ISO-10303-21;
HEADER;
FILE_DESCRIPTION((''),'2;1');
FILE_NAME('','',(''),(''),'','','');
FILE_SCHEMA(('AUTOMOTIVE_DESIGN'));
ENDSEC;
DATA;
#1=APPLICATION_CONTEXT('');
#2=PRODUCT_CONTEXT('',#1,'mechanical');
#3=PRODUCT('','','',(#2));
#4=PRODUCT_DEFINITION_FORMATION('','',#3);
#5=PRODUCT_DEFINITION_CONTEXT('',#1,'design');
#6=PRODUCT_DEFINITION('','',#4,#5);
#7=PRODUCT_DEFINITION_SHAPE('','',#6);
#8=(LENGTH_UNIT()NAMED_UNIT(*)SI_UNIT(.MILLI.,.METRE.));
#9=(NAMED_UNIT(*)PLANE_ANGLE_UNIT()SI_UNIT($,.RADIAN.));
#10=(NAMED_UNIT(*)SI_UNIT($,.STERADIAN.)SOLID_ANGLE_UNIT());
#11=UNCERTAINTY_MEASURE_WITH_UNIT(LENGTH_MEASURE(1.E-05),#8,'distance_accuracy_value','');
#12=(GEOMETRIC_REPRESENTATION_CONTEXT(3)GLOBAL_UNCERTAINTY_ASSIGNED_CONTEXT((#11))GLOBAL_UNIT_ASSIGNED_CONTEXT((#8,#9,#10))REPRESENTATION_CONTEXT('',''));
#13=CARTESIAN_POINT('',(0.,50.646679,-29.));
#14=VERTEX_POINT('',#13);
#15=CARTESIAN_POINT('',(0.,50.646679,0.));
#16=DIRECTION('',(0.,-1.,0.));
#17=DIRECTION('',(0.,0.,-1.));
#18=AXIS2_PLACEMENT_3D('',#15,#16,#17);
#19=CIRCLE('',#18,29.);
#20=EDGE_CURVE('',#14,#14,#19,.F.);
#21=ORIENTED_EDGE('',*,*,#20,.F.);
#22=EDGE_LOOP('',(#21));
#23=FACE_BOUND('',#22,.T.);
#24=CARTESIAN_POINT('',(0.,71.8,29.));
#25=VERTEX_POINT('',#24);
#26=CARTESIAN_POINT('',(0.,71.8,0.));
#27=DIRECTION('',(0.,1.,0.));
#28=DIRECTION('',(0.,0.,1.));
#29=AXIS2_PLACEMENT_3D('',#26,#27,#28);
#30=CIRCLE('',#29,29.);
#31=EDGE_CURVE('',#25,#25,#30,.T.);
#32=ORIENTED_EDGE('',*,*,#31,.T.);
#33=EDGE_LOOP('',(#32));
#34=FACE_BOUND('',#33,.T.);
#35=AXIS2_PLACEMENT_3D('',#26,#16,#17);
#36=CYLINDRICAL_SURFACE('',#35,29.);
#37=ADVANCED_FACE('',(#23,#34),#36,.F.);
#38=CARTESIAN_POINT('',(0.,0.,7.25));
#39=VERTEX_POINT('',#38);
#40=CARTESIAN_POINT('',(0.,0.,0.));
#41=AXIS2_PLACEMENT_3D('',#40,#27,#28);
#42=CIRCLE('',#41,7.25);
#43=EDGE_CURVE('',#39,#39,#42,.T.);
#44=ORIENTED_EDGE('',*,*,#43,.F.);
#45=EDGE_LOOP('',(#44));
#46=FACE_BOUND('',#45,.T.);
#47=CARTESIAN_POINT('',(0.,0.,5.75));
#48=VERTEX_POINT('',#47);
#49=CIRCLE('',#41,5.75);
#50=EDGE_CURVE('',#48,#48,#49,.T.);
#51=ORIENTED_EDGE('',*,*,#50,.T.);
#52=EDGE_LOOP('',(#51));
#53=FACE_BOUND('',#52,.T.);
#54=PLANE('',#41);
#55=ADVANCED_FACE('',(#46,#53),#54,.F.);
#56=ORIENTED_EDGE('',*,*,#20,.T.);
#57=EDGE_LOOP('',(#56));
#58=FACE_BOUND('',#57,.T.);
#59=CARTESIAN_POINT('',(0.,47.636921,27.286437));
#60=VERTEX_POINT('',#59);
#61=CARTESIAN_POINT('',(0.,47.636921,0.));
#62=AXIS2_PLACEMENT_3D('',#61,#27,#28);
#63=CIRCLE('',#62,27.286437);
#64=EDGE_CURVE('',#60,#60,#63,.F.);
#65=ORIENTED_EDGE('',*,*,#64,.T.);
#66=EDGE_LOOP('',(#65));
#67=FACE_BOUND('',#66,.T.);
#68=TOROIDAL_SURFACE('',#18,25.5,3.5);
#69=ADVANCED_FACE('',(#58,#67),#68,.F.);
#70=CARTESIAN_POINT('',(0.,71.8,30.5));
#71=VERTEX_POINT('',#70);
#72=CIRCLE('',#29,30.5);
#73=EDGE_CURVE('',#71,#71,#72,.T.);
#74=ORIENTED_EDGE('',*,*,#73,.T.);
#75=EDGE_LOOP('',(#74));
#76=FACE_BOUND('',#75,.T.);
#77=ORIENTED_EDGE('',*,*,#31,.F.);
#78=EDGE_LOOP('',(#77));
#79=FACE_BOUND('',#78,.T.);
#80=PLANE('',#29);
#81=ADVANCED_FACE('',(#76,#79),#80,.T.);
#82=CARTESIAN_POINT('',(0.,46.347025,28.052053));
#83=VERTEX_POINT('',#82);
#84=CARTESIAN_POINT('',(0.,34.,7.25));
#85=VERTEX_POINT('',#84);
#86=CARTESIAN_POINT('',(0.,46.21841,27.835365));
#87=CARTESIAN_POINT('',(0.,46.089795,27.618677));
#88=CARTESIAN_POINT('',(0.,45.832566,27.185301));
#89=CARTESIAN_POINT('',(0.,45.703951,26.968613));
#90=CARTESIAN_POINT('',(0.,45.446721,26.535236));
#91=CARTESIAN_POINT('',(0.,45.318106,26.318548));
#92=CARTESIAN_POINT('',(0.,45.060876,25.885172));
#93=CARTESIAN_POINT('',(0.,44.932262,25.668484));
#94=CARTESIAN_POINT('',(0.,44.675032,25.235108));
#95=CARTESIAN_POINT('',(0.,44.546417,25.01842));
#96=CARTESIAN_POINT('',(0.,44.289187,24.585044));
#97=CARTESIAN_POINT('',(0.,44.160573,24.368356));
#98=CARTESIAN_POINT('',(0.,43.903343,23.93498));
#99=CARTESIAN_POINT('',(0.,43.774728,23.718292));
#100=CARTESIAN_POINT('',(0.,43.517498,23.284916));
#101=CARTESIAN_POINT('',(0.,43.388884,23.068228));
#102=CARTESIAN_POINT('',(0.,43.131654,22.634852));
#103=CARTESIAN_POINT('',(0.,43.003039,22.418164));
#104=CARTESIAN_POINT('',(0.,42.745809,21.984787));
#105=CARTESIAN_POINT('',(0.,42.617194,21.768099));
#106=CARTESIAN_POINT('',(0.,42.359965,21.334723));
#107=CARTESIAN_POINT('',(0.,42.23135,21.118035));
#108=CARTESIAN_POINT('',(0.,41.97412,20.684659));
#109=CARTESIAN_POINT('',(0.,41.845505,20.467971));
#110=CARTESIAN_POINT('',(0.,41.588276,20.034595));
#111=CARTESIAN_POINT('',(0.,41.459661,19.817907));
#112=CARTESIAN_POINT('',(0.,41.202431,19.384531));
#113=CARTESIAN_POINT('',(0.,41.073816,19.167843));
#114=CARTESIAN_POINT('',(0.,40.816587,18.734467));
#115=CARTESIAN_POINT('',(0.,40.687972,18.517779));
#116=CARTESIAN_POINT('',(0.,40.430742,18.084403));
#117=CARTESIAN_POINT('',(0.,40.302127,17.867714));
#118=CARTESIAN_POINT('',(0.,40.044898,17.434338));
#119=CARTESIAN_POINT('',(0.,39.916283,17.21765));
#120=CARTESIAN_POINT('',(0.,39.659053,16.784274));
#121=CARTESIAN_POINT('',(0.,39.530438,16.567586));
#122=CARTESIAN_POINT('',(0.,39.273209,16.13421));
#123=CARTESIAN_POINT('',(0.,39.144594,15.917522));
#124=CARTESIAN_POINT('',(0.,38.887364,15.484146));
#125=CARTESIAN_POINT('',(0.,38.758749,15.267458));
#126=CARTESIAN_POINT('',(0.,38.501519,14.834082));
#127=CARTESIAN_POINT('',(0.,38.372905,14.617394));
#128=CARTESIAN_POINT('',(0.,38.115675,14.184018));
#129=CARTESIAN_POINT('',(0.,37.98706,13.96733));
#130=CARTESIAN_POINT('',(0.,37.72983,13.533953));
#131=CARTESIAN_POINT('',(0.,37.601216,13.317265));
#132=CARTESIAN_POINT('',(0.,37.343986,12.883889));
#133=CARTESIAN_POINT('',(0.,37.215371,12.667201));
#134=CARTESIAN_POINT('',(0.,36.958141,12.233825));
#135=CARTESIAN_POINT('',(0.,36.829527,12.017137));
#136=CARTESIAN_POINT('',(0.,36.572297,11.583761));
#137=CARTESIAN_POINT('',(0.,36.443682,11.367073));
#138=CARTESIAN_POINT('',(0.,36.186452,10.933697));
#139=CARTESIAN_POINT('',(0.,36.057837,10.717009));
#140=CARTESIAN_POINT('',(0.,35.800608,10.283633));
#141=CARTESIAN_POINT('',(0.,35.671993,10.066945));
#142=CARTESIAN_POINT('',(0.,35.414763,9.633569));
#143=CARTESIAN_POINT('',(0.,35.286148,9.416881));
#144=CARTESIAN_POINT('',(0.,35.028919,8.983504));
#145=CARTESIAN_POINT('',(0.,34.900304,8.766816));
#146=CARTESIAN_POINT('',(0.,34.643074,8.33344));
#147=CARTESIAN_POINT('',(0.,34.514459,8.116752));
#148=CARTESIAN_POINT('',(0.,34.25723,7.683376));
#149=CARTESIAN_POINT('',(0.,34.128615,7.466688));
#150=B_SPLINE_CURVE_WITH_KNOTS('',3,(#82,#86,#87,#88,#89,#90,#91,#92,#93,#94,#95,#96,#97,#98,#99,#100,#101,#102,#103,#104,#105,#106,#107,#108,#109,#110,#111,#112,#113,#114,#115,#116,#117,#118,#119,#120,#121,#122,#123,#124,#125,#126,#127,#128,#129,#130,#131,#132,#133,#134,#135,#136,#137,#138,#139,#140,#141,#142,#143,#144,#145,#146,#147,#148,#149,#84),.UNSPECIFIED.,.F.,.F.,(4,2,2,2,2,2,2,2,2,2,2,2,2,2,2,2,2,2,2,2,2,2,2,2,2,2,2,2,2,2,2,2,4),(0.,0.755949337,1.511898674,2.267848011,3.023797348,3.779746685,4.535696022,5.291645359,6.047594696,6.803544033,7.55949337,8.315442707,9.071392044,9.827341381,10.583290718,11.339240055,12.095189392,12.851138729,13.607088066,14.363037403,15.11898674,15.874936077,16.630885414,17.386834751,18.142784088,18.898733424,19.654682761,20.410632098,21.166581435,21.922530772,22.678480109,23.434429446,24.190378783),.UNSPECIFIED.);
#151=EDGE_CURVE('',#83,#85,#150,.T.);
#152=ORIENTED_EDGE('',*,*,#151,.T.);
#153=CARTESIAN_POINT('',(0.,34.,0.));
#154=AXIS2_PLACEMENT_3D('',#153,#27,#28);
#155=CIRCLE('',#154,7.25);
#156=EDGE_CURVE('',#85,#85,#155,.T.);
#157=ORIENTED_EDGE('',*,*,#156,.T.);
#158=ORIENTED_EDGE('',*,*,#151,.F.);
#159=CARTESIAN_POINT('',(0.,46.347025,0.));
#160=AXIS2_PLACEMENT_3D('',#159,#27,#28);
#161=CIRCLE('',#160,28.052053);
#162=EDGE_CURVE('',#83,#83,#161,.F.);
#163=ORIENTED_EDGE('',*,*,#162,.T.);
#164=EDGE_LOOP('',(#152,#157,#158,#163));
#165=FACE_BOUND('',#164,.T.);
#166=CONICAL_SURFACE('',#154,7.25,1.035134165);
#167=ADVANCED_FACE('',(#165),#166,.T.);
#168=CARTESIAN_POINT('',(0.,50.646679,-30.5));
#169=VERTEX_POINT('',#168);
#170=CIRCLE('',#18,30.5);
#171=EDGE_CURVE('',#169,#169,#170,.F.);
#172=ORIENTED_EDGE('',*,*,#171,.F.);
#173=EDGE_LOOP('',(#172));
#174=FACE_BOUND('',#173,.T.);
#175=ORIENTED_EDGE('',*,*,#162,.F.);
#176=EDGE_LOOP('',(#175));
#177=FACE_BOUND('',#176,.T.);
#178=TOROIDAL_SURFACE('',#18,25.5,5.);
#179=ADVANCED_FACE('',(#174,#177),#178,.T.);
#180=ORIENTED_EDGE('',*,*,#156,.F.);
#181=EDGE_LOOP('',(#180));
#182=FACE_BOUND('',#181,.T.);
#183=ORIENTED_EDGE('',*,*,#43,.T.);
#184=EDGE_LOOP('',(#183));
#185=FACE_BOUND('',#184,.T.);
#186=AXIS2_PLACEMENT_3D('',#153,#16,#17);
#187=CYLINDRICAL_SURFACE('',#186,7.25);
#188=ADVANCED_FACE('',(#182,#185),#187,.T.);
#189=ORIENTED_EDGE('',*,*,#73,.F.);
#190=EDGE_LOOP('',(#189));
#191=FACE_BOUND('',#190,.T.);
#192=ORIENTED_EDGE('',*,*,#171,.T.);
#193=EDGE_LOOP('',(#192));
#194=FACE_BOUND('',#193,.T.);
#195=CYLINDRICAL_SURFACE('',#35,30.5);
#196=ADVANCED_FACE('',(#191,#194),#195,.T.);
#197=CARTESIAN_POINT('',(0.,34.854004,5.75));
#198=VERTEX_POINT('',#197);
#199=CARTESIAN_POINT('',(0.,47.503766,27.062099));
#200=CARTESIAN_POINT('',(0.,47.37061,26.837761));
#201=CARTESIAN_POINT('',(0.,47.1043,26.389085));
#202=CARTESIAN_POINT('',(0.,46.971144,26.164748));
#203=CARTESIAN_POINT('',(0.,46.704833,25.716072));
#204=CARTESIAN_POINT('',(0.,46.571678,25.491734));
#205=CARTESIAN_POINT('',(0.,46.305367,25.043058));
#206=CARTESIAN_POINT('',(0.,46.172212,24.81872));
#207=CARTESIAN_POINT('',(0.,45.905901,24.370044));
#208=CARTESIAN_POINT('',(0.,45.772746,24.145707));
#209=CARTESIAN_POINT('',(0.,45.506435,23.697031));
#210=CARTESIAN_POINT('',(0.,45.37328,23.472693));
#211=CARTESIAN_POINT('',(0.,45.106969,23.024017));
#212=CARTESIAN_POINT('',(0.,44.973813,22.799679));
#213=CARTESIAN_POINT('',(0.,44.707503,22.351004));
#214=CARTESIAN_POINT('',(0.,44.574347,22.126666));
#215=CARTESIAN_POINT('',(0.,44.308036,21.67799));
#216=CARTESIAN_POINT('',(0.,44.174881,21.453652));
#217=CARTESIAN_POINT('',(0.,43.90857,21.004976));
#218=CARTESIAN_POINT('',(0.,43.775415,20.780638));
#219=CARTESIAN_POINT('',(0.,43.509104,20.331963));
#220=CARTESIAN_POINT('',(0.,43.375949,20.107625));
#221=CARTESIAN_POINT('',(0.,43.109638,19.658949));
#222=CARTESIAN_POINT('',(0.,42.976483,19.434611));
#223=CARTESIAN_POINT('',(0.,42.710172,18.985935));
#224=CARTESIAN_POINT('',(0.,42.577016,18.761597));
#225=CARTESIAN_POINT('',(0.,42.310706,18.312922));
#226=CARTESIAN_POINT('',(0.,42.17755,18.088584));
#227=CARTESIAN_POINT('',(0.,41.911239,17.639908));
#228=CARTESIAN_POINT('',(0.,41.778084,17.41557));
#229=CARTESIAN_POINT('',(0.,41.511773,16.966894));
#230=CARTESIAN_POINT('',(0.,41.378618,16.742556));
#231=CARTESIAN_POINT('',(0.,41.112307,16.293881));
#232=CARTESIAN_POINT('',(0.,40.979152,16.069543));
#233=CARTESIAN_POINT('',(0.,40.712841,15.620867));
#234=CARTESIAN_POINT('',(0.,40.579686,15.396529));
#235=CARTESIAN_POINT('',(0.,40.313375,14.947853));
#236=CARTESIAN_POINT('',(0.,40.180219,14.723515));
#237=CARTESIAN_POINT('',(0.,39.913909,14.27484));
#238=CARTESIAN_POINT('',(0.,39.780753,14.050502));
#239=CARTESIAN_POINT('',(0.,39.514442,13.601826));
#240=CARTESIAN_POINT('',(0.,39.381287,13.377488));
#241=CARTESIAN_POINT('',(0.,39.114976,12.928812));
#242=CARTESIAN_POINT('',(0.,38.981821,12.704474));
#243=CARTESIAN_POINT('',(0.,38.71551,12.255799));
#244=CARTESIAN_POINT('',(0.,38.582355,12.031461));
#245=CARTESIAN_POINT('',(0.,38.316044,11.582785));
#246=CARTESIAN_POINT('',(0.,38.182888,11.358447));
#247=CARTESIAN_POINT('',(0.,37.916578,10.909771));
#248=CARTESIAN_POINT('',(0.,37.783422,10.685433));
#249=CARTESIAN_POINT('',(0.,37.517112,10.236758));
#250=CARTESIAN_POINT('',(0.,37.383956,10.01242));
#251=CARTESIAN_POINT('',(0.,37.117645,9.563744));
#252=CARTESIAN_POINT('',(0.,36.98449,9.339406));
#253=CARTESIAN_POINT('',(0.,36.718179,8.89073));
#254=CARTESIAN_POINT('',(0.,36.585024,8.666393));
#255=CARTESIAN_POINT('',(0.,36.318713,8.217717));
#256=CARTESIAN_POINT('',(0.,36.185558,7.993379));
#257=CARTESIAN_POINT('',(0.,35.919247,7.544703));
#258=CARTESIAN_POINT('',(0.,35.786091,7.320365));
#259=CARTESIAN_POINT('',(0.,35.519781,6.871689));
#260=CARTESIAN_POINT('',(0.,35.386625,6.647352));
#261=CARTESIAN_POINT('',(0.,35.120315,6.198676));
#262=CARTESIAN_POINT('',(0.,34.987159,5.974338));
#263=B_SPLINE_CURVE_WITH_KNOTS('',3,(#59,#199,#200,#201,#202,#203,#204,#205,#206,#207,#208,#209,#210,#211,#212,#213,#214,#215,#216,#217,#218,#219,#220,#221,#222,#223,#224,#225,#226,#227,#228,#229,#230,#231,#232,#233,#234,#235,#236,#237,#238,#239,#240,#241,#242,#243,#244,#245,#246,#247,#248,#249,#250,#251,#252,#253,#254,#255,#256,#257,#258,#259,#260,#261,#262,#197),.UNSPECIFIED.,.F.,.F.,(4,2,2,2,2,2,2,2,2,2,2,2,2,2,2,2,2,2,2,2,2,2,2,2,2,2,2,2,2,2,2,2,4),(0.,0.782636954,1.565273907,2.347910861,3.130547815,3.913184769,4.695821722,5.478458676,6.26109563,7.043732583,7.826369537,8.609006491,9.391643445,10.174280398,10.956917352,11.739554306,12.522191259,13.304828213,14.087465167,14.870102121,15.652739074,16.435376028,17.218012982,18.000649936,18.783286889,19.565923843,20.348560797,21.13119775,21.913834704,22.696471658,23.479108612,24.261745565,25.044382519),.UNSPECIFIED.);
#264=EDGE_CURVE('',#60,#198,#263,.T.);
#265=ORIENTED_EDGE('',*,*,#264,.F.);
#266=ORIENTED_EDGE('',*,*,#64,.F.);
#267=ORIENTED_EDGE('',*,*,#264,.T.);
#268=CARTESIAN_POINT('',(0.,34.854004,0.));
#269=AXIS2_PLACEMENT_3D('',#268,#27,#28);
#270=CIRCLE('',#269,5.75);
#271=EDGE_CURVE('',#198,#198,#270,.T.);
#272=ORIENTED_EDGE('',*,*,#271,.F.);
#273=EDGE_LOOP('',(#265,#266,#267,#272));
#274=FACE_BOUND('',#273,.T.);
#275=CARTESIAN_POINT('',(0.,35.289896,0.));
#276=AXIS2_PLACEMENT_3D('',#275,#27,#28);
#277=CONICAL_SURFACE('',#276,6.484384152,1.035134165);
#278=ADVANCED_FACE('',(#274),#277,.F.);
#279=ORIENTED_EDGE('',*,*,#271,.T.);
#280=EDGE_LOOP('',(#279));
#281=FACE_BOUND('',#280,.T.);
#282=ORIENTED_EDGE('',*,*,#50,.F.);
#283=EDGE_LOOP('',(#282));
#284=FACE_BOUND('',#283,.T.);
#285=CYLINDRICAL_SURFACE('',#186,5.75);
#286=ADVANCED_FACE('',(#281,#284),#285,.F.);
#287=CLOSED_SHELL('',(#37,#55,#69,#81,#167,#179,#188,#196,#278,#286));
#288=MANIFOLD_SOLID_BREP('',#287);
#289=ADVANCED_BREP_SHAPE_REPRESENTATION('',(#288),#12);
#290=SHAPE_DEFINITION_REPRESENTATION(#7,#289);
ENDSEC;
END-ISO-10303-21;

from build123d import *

# Parameters (mm, degrees)
CROQUIS1_R              = 7.25
SALIENTE_EXTRUIR1_DEPTH = 34
CROQUIS2_R              = 30.5
SALIENTE_EXTRUIR2_DEPTH = 24
CROQUIS3_R              = 7.25
CROQUIS2_2_R            = 30.5
REDONDEO1_R             = 5
VACIADO1_T              = -1.5


with BuildPart() as part:
    # Croquis1 → Saliente-Extruir1 (new body)
    with BuildSketch(Plane(origin=(0, 0, 0), x_dir=(1, 0, 0), z_dir=(0, 1, 0))):
        Circle(CROQUIS1_R)
    extrude(amount=SALIENTE_EXTRUIR1_DEPTH)



with BuildPart() as body_2:
    # Croquis2 → Saliente-Extruir2 (new body)
    with BuildSketch(Plane(origin=(0, 47.8, 0), x_dir=(1, 0, 0), z_dir=(0, 1, 0))):
        Circle(CROQUIS2_R)
    extrude(amount=SALIENTE_EXTRUIR2_DEPTH)


with BuildPart() as part_1:
    add(part.part)

    add(body_2.part)  # Recubrir1 merges body 2
    # Croquis3 → Recubrir1 section 0
    with BuildSketch(Plane(origin=(0, 34, 0), x_dir=(1, 0, 0), z_dir=(0, 1, 0))):
        Circle(CROQUIS3_R)
    # Croquis2<2> → Recubrir1 section 1
    with BuildSketch(Plane(origin=(0, 47.8, 0), x_dir=(1, 0, 0), z_dir=(0, 1, 0))):
        Circle(CROQUIS2_2_R)
    loft()

    # Redondeo1
    redondeo1_edges = [part_1.edges().sort_by_distance(p)[0] for p in [
        (-30.5, 47.8, 0),
    ]]
    fillet(redondeo1_edges, radius=REDONDEO1_R)

    # Vaciado1
    vaciado1_openings = [part_1.faces().sort_by_distance(p)[0] for p in [
        (0, 0, 0),
        (0, 71.8, 0),
    ]]
    offset(amount=VACIADO1_T, openings=vaciado1_openings, kind=Kind.INTERSECTION)


solid = part_1.part
